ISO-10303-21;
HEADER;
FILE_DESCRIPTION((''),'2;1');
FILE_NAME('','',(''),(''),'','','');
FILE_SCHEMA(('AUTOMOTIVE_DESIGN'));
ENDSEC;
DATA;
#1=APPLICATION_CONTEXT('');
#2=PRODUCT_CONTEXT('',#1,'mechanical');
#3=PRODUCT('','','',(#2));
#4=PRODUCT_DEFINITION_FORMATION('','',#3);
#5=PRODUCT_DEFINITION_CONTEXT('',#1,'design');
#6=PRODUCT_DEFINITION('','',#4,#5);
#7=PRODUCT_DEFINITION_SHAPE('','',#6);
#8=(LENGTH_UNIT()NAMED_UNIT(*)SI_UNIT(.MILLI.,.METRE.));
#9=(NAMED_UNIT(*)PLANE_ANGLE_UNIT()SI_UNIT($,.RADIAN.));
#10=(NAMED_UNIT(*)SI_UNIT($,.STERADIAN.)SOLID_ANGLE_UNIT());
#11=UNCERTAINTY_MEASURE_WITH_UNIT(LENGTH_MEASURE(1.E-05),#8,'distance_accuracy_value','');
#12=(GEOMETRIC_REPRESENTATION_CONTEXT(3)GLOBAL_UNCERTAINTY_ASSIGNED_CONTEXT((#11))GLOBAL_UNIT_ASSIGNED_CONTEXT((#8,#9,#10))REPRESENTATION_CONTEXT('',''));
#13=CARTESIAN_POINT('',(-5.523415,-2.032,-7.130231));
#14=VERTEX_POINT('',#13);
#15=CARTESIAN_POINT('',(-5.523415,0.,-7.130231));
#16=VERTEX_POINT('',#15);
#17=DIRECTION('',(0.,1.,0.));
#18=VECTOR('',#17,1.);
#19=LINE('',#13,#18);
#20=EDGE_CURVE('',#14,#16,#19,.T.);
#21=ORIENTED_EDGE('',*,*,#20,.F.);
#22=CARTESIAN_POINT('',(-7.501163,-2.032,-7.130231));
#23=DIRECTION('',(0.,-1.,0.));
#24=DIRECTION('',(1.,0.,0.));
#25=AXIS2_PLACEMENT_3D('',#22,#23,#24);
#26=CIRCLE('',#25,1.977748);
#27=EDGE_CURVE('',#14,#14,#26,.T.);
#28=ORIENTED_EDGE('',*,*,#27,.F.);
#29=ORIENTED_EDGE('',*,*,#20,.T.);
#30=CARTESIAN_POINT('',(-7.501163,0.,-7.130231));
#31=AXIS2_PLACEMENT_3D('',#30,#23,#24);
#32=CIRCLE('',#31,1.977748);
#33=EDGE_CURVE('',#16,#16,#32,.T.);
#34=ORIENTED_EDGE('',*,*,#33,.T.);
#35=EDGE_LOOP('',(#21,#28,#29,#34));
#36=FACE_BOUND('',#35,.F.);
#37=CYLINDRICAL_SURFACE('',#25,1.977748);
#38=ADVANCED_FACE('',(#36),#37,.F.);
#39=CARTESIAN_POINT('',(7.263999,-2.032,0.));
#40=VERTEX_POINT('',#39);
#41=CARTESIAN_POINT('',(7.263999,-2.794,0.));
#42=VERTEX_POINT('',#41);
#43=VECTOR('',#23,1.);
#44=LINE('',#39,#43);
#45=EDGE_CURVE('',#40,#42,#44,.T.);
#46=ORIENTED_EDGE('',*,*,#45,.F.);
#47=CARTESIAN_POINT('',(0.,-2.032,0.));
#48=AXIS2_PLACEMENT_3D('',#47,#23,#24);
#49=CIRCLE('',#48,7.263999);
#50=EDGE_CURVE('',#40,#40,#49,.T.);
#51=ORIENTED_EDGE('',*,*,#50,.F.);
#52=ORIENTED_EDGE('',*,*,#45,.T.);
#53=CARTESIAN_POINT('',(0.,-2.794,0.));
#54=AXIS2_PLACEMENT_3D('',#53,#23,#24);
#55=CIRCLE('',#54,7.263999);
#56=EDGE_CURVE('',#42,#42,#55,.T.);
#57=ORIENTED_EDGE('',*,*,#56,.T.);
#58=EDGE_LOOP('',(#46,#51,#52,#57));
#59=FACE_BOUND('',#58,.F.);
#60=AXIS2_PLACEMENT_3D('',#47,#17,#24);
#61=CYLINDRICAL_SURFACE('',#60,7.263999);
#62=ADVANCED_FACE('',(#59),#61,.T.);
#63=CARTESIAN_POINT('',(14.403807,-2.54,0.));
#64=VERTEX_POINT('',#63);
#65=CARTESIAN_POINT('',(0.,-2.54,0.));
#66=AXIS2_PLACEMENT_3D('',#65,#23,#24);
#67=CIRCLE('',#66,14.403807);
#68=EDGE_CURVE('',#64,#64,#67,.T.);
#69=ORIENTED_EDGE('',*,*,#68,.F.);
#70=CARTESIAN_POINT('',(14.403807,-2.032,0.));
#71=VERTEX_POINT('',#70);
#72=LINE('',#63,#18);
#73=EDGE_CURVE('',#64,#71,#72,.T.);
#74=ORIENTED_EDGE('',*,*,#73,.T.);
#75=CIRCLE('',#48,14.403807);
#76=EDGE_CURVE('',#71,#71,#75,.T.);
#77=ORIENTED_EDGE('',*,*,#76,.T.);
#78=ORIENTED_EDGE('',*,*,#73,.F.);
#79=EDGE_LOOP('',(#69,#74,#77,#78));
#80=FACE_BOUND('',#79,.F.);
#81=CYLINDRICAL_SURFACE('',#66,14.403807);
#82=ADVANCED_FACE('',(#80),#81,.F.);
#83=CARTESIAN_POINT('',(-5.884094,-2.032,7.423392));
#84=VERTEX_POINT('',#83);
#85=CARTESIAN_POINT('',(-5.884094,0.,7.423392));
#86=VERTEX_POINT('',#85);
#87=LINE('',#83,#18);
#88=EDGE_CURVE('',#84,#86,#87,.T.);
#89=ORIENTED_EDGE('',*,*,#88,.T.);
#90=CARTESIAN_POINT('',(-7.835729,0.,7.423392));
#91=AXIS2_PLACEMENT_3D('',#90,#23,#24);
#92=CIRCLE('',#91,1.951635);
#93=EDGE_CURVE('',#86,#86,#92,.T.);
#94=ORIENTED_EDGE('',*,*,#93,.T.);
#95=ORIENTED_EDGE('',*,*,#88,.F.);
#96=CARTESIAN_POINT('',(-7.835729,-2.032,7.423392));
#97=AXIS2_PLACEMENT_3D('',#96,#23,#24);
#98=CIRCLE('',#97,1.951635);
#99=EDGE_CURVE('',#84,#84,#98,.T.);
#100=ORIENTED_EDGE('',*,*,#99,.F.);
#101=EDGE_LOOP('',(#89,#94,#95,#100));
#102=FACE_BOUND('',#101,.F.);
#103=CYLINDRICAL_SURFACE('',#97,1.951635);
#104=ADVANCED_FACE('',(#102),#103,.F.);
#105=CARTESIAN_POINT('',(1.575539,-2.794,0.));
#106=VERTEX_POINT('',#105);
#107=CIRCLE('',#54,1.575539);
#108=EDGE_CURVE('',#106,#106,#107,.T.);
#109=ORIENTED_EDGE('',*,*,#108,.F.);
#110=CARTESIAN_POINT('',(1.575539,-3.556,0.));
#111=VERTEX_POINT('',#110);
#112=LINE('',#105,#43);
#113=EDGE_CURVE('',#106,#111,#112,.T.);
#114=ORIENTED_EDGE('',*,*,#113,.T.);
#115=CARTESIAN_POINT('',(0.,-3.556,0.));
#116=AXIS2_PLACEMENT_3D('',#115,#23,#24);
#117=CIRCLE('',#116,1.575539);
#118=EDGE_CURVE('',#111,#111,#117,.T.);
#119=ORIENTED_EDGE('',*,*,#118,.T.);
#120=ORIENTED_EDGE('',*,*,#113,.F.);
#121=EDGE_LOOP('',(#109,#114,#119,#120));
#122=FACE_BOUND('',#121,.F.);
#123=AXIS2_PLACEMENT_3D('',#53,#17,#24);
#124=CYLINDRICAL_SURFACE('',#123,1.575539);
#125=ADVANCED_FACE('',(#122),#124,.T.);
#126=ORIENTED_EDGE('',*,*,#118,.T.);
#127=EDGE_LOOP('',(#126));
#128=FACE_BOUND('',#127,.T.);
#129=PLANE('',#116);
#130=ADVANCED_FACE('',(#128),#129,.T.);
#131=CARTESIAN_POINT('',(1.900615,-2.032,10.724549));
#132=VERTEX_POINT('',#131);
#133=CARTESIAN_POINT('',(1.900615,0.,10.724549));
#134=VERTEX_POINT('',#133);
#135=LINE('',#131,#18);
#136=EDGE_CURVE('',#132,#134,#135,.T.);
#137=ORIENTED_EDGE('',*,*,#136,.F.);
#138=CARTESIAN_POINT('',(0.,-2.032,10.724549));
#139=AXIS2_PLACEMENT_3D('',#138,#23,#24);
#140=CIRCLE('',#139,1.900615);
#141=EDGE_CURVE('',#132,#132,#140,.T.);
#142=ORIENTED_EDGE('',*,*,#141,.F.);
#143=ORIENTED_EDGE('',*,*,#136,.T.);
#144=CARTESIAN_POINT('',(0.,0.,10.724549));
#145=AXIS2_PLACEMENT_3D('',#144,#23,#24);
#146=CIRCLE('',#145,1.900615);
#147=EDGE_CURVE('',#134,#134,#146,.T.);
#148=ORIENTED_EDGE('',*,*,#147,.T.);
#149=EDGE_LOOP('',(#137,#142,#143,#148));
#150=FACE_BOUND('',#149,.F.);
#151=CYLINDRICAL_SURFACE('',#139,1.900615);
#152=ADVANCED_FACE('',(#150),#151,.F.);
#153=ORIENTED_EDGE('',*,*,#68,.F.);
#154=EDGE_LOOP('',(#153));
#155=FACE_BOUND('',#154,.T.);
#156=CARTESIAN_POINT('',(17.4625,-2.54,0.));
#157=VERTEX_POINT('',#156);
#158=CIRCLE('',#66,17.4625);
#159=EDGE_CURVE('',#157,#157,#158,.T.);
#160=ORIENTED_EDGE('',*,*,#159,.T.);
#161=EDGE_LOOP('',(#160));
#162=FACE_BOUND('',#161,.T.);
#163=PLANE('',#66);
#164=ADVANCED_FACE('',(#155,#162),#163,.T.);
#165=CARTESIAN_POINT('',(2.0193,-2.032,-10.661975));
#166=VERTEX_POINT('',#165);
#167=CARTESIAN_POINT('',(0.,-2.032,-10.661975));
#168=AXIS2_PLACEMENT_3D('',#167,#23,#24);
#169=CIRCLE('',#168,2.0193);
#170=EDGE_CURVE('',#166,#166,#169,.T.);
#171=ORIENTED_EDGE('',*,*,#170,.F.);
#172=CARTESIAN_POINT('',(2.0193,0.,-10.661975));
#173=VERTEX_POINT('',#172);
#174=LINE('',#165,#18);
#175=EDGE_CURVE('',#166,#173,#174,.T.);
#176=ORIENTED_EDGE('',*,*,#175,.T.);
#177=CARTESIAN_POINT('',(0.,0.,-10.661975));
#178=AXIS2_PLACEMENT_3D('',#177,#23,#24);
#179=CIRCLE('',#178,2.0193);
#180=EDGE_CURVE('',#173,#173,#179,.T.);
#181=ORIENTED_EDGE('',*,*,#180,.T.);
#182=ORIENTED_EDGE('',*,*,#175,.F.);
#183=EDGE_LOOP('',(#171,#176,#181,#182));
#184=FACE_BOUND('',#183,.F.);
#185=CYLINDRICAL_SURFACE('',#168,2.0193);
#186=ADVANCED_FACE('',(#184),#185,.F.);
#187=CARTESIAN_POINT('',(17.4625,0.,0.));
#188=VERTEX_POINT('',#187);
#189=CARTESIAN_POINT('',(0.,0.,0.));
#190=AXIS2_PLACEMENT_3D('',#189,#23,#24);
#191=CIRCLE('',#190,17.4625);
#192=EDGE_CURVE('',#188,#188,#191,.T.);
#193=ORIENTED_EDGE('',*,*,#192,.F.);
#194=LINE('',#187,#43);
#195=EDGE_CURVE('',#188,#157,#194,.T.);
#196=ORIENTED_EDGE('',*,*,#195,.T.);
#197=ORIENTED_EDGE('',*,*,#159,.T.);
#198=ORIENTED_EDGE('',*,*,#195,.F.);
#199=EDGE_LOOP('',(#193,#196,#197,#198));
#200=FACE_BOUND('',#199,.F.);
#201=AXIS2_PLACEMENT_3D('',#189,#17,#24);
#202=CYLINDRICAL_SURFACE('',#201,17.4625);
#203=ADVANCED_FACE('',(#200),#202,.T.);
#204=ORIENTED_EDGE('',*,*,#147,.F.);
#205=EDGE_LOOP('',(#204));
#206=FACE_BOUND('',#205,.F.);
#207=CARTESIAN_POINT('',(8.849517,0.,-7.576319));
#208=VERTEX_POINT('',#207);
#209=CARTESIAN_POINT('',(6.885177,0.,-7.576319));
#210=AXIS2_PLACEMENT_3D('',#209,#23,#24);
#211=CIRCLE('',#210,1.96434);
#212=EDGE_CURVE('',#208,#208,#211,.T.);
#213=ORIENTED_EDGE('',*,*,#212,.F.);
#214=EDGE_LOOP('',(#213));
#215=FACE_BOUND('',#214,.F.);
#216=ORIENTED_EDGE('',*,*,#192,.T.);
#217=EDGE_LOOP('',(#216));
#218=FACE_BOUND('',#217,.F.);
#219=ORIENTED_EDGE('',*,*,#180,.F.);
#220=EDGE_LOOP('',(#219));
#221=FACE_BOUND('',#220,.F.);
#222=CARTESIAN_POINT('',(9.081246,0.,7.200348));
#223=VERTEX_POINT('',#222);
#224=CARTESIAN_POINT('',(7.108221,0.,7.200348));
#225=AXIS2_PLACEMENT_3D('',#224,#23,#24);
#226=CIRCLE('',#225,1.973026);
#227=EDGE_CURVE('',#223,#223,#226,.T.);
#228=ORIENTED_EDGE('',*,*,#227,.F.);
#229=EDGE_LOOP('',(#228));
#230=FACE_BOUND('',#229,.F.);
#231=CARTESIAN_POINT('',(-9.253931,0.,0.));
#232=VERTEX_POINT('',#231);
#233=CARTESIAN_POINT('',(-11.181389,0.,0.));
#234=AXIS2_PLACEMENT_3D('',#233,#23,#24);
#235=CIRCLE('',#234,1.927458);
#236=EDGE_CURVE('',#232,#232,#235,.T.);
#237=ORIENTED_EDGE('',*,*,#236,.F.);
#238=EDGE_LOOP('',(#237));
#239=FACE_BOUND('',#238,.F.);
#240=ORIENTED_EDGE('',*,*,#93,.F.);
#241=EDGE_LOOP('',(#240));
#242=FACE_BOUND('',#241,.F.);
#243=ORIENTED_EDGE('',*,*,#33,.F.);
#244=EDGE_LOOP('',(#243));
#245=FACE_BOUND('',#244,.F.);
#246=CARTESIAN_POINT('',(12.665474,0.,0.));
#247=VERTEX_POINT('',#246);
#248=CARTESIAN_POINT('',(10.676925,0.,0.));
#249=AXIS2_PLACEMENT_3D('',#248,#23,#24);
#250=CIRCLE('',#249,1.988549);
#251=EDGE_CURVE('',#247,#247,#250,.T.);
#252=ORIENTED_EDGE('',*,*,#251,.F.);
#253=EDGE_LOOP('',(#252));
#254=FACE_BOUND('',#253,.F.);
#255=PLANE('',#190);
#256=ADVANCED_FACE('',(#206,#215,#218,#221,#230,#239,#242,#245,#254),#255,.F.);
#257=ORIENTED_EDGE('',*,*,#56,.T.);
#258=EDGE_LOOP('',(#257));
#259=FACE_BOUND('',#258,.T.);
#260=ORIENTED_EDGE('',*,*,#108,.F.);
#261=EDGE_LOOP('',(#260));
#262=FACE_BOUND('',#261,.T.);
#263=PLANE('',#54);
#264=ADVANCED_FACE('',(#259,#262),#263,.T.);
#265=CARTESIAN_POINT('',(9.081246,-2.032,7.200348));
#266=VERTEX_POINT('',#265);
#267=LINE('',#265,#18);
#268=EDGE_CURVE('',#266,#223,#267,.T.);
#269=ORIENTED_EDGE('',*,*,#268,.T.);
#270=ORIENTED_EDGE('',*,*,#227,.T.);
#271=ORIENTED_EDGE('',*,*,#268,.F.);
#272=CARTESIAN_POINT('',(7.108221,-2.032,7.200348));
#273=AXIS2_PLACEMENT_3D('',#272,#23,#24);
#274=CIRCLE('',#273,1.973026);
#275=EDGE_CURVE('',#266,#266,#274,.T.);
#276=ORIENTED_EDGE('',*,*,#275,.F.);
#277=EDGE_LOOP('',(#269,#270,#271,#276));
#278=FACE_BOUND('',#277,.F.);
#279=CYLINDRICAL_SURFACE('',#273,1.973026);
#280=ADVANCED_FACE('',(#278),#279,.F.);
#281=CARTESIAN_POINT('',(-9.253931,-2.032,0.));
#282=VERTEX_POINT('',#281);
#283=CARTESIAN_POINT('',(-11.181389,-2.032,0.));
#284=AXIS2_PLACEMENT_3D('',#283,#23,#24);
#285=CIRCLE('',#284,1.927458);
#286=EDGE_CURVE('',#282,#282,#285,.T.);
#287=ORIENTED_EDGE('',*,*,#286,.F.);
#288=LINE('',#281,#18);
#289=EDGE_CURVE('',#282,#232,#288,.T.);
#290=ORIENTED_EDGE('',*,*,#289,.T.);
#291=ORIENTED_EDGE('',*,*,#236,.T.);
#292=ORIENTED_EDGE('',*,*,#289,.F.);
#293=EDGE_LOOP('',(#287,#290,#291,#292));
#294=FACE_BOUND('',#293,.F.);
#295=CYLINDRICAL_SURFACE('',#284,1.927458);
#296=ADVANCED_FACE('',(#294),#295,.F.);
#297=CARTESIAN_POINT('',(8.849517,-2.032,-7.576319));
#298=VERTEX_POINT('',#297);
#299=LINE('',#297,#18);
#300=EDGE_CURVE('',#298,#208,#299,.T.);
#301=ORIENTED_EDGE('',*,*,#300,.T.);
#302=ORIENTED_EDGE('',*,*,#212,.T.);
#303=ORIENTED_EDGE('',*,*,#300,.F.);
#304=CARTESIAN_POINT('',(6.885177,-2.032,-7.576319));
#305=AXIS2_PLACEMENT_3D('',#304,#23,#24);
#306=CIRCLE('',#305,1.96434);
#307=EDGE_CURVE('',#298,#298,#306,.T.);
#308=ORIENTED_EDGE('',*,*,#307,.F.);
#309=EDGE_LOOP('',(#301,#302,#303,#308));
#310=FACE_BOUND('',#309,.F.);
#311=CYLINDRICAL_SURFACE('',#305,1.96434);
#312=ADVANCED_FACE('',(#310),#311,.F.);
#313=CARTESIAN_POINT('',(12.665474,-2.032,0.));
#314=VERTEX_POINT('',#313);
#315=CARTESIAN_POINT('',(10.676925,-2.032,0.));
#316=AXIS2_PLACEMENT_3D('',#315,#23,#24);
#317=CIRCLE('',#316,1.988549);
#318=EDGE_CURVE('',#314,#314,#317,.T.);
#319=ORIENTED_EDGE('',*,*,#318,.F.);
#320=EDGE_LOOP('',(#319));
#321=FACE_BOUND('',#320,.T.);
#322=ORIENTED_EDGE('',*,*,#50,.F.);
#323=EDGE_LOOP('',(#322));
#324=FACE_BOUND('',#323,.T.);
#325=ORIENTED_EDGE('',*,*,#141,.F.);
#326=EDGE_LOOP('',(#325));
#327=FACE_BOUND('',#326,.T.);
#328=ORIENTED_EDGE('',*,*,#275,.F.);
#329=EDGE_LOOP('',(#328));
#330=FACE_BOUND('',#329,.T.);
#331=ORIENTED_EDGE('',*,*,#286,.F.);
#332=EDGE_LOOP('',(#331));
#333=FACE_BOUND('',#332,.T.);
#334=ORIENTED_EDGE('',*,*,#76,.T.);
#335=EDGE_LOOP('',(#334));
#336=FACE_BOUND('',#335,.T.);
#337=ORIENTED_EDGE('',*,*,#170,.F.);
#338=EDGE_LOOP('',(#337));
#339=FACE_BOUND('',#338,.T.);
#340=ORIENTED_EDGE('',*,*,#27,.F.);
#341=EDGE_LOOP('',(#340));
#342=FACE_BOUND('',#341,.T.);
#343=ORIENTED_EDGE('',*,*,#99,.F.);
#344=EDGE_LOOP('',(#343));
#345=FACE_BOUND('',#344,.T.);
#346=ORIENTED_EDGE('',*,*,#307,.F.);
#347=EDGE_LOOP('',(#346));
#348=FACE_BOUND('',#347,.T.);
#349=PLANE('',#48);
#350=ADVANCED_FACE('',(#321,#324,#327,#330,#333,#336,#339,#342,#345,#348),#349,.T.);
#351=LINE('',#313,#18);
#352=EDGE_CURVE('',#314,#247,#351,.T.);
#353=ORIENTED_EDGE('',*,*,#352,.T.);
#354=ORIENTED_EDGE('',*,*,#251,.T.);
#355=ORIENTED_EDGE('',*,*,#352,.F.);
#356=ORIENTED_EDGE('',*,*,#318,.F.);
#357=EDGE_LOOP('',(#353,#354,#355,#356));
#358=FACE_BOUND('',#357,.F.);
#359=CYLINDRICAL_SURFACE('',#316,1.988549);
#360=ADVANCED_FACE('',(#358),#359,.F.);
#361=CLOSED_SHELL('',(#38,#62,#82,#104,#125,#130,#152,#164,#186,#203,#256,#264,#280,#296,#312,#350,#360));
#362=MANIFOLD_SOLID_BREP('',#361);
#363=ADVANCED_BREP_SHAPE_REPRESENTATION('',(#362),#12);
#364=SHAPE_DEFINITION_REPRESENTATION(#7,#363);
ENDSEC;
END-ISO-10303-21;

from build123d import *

# Parameters (mm, degrees)
F0_R      = 17.4625
F1_DEPTH  = 2.54
F2_R      = 14.4038068866
F3_DEPTH  = 0.508
F4_R      = 7.2639989676
F5_DEPTH  = 0.762
F6_R      = 1.5755390971
F7_DEPTH  = 0.762
F8_R      = 1.9006154527
F9_DEPTH  = 25.4
F10_R     = 2.0193
F11_DEPTH = 25.4
F12_R     = 1.927458399
F13_DEPTH = 25.4
F14_R     = 1.9885487684
F15_DEPTH = 25.4
F16_R     = 1.9516354427
F17_DEPTH = 25.4
F18_R     = 1.9777477245
F19_DEPTH = 25.4
F20_R     = 1.9643397756
F21_DEPTH = 25.4
F22_R     = 1.9730256653
F23_DEPTH = 25.4


# Not quite as in the source:
# - the program builds the solid bodies; features that only make, move or delete a surface that nothing else refers to are left out


with BuildPart() as f1:
    # F0 (on Front) → F1 (new body)
    with BuildSketch(Plane.XZ):
        Circle(F0_R)
    extrude(amount=F1_DEPTH)

    # F2 (on face) → F3 (cut)
    with BuildSketch(Plane.XZ.offset(2.54)):
        Circle(F2_R)
    extrude(amount=-F3_DEPTH, mode=Mode.SUBTRACT)

    # F4 (on face) → F5 (join)
    with BuildSketch(Plane.XZ.offset(2.032)):
        Circle(F4_R)
    extrude(amount=F5_DEPTH)

    # F6 (on face) → F7 (join)
    with BuildSketch(Plane.XZ.offset(2.794)):
        Circle(F6_R)
    extrude(amount=F7_DEPTH)

    # F8 (on face) → F9 (cut)
    with BuildSketch(Plane.XZ.offset(2.032)):
        with Locations((0, 10.7245491818)):
            Circle(F8_R)
    extrude(amount=-F9_DEPTH, mode=Mode.SUBTRACT)

    # F10 (on face) → F11 (cut)
    with BuildSketch(Plane.XZ.offset(2.032)):
        with Locations((0, -10.661974936)):
            Circle(F10_R)
    extrude(amount=-F11_DEPTH, mode=Mode.SUBTRACT)

    # F12 (on face) → F13 (cut)
    with BuildSketch(Plane.XZ.offset(2.032)):
        with Locations((-11.1813889816, 0)):
            Circle(F12_R)
    extrude(amount=-F13_DEPTH, mode=Mode.SUBTRACT)

    # F14 (on face) → F15 (cut)
    with BuildSketch(Plane.XZ.offset(2.032)):
        with Locations((10.6769250706, 0)):
            Circle(F14_R)
    extrude(amount=-F15_DEPTH, mode=Mode.SUBTRACT)

    # F16 (on face) → F17 (cut)
    with BuildSketch(Plane.XZ.offset(2.032)):
        with Locations((-7.8357290477, 7.4233920313)):
            Circle(F16_R)
    extrude(amount=-F17_DEPTH, mode=Mode.SUBTRACT)

    # F18 (on face) → F19 (cut)
    with BuildSketch(Plane.XZ.offset(2.032)):
        with Locations((-7.5011625886, -7.130230777)):
            Circle(F18_R)
    extrude(amount=-F19_DEPTH, mode=Mode.SUBTRACT)

    # F20 (on face) → F21 (cut)
    with BuildSketch(Plane.XZ.offset(2.032)):
        with Locations((6.8851769902, -7.5763189234)):
            Circle(F20_R)
    extrude(amount=-F21_DEPTH, mode=Mode.SUBTRACT)

    # F22 (on face) → F23 (cut)
    with BuildSketch(Plane.XZ.offset(2.032)):
        with Locations((7.1082208306, 7.200348191)):
            Circle(F22_R)
    extrude(amount=-F23_DEPTH, mode=Mode.SUBTRACT)


solid = f1.part
